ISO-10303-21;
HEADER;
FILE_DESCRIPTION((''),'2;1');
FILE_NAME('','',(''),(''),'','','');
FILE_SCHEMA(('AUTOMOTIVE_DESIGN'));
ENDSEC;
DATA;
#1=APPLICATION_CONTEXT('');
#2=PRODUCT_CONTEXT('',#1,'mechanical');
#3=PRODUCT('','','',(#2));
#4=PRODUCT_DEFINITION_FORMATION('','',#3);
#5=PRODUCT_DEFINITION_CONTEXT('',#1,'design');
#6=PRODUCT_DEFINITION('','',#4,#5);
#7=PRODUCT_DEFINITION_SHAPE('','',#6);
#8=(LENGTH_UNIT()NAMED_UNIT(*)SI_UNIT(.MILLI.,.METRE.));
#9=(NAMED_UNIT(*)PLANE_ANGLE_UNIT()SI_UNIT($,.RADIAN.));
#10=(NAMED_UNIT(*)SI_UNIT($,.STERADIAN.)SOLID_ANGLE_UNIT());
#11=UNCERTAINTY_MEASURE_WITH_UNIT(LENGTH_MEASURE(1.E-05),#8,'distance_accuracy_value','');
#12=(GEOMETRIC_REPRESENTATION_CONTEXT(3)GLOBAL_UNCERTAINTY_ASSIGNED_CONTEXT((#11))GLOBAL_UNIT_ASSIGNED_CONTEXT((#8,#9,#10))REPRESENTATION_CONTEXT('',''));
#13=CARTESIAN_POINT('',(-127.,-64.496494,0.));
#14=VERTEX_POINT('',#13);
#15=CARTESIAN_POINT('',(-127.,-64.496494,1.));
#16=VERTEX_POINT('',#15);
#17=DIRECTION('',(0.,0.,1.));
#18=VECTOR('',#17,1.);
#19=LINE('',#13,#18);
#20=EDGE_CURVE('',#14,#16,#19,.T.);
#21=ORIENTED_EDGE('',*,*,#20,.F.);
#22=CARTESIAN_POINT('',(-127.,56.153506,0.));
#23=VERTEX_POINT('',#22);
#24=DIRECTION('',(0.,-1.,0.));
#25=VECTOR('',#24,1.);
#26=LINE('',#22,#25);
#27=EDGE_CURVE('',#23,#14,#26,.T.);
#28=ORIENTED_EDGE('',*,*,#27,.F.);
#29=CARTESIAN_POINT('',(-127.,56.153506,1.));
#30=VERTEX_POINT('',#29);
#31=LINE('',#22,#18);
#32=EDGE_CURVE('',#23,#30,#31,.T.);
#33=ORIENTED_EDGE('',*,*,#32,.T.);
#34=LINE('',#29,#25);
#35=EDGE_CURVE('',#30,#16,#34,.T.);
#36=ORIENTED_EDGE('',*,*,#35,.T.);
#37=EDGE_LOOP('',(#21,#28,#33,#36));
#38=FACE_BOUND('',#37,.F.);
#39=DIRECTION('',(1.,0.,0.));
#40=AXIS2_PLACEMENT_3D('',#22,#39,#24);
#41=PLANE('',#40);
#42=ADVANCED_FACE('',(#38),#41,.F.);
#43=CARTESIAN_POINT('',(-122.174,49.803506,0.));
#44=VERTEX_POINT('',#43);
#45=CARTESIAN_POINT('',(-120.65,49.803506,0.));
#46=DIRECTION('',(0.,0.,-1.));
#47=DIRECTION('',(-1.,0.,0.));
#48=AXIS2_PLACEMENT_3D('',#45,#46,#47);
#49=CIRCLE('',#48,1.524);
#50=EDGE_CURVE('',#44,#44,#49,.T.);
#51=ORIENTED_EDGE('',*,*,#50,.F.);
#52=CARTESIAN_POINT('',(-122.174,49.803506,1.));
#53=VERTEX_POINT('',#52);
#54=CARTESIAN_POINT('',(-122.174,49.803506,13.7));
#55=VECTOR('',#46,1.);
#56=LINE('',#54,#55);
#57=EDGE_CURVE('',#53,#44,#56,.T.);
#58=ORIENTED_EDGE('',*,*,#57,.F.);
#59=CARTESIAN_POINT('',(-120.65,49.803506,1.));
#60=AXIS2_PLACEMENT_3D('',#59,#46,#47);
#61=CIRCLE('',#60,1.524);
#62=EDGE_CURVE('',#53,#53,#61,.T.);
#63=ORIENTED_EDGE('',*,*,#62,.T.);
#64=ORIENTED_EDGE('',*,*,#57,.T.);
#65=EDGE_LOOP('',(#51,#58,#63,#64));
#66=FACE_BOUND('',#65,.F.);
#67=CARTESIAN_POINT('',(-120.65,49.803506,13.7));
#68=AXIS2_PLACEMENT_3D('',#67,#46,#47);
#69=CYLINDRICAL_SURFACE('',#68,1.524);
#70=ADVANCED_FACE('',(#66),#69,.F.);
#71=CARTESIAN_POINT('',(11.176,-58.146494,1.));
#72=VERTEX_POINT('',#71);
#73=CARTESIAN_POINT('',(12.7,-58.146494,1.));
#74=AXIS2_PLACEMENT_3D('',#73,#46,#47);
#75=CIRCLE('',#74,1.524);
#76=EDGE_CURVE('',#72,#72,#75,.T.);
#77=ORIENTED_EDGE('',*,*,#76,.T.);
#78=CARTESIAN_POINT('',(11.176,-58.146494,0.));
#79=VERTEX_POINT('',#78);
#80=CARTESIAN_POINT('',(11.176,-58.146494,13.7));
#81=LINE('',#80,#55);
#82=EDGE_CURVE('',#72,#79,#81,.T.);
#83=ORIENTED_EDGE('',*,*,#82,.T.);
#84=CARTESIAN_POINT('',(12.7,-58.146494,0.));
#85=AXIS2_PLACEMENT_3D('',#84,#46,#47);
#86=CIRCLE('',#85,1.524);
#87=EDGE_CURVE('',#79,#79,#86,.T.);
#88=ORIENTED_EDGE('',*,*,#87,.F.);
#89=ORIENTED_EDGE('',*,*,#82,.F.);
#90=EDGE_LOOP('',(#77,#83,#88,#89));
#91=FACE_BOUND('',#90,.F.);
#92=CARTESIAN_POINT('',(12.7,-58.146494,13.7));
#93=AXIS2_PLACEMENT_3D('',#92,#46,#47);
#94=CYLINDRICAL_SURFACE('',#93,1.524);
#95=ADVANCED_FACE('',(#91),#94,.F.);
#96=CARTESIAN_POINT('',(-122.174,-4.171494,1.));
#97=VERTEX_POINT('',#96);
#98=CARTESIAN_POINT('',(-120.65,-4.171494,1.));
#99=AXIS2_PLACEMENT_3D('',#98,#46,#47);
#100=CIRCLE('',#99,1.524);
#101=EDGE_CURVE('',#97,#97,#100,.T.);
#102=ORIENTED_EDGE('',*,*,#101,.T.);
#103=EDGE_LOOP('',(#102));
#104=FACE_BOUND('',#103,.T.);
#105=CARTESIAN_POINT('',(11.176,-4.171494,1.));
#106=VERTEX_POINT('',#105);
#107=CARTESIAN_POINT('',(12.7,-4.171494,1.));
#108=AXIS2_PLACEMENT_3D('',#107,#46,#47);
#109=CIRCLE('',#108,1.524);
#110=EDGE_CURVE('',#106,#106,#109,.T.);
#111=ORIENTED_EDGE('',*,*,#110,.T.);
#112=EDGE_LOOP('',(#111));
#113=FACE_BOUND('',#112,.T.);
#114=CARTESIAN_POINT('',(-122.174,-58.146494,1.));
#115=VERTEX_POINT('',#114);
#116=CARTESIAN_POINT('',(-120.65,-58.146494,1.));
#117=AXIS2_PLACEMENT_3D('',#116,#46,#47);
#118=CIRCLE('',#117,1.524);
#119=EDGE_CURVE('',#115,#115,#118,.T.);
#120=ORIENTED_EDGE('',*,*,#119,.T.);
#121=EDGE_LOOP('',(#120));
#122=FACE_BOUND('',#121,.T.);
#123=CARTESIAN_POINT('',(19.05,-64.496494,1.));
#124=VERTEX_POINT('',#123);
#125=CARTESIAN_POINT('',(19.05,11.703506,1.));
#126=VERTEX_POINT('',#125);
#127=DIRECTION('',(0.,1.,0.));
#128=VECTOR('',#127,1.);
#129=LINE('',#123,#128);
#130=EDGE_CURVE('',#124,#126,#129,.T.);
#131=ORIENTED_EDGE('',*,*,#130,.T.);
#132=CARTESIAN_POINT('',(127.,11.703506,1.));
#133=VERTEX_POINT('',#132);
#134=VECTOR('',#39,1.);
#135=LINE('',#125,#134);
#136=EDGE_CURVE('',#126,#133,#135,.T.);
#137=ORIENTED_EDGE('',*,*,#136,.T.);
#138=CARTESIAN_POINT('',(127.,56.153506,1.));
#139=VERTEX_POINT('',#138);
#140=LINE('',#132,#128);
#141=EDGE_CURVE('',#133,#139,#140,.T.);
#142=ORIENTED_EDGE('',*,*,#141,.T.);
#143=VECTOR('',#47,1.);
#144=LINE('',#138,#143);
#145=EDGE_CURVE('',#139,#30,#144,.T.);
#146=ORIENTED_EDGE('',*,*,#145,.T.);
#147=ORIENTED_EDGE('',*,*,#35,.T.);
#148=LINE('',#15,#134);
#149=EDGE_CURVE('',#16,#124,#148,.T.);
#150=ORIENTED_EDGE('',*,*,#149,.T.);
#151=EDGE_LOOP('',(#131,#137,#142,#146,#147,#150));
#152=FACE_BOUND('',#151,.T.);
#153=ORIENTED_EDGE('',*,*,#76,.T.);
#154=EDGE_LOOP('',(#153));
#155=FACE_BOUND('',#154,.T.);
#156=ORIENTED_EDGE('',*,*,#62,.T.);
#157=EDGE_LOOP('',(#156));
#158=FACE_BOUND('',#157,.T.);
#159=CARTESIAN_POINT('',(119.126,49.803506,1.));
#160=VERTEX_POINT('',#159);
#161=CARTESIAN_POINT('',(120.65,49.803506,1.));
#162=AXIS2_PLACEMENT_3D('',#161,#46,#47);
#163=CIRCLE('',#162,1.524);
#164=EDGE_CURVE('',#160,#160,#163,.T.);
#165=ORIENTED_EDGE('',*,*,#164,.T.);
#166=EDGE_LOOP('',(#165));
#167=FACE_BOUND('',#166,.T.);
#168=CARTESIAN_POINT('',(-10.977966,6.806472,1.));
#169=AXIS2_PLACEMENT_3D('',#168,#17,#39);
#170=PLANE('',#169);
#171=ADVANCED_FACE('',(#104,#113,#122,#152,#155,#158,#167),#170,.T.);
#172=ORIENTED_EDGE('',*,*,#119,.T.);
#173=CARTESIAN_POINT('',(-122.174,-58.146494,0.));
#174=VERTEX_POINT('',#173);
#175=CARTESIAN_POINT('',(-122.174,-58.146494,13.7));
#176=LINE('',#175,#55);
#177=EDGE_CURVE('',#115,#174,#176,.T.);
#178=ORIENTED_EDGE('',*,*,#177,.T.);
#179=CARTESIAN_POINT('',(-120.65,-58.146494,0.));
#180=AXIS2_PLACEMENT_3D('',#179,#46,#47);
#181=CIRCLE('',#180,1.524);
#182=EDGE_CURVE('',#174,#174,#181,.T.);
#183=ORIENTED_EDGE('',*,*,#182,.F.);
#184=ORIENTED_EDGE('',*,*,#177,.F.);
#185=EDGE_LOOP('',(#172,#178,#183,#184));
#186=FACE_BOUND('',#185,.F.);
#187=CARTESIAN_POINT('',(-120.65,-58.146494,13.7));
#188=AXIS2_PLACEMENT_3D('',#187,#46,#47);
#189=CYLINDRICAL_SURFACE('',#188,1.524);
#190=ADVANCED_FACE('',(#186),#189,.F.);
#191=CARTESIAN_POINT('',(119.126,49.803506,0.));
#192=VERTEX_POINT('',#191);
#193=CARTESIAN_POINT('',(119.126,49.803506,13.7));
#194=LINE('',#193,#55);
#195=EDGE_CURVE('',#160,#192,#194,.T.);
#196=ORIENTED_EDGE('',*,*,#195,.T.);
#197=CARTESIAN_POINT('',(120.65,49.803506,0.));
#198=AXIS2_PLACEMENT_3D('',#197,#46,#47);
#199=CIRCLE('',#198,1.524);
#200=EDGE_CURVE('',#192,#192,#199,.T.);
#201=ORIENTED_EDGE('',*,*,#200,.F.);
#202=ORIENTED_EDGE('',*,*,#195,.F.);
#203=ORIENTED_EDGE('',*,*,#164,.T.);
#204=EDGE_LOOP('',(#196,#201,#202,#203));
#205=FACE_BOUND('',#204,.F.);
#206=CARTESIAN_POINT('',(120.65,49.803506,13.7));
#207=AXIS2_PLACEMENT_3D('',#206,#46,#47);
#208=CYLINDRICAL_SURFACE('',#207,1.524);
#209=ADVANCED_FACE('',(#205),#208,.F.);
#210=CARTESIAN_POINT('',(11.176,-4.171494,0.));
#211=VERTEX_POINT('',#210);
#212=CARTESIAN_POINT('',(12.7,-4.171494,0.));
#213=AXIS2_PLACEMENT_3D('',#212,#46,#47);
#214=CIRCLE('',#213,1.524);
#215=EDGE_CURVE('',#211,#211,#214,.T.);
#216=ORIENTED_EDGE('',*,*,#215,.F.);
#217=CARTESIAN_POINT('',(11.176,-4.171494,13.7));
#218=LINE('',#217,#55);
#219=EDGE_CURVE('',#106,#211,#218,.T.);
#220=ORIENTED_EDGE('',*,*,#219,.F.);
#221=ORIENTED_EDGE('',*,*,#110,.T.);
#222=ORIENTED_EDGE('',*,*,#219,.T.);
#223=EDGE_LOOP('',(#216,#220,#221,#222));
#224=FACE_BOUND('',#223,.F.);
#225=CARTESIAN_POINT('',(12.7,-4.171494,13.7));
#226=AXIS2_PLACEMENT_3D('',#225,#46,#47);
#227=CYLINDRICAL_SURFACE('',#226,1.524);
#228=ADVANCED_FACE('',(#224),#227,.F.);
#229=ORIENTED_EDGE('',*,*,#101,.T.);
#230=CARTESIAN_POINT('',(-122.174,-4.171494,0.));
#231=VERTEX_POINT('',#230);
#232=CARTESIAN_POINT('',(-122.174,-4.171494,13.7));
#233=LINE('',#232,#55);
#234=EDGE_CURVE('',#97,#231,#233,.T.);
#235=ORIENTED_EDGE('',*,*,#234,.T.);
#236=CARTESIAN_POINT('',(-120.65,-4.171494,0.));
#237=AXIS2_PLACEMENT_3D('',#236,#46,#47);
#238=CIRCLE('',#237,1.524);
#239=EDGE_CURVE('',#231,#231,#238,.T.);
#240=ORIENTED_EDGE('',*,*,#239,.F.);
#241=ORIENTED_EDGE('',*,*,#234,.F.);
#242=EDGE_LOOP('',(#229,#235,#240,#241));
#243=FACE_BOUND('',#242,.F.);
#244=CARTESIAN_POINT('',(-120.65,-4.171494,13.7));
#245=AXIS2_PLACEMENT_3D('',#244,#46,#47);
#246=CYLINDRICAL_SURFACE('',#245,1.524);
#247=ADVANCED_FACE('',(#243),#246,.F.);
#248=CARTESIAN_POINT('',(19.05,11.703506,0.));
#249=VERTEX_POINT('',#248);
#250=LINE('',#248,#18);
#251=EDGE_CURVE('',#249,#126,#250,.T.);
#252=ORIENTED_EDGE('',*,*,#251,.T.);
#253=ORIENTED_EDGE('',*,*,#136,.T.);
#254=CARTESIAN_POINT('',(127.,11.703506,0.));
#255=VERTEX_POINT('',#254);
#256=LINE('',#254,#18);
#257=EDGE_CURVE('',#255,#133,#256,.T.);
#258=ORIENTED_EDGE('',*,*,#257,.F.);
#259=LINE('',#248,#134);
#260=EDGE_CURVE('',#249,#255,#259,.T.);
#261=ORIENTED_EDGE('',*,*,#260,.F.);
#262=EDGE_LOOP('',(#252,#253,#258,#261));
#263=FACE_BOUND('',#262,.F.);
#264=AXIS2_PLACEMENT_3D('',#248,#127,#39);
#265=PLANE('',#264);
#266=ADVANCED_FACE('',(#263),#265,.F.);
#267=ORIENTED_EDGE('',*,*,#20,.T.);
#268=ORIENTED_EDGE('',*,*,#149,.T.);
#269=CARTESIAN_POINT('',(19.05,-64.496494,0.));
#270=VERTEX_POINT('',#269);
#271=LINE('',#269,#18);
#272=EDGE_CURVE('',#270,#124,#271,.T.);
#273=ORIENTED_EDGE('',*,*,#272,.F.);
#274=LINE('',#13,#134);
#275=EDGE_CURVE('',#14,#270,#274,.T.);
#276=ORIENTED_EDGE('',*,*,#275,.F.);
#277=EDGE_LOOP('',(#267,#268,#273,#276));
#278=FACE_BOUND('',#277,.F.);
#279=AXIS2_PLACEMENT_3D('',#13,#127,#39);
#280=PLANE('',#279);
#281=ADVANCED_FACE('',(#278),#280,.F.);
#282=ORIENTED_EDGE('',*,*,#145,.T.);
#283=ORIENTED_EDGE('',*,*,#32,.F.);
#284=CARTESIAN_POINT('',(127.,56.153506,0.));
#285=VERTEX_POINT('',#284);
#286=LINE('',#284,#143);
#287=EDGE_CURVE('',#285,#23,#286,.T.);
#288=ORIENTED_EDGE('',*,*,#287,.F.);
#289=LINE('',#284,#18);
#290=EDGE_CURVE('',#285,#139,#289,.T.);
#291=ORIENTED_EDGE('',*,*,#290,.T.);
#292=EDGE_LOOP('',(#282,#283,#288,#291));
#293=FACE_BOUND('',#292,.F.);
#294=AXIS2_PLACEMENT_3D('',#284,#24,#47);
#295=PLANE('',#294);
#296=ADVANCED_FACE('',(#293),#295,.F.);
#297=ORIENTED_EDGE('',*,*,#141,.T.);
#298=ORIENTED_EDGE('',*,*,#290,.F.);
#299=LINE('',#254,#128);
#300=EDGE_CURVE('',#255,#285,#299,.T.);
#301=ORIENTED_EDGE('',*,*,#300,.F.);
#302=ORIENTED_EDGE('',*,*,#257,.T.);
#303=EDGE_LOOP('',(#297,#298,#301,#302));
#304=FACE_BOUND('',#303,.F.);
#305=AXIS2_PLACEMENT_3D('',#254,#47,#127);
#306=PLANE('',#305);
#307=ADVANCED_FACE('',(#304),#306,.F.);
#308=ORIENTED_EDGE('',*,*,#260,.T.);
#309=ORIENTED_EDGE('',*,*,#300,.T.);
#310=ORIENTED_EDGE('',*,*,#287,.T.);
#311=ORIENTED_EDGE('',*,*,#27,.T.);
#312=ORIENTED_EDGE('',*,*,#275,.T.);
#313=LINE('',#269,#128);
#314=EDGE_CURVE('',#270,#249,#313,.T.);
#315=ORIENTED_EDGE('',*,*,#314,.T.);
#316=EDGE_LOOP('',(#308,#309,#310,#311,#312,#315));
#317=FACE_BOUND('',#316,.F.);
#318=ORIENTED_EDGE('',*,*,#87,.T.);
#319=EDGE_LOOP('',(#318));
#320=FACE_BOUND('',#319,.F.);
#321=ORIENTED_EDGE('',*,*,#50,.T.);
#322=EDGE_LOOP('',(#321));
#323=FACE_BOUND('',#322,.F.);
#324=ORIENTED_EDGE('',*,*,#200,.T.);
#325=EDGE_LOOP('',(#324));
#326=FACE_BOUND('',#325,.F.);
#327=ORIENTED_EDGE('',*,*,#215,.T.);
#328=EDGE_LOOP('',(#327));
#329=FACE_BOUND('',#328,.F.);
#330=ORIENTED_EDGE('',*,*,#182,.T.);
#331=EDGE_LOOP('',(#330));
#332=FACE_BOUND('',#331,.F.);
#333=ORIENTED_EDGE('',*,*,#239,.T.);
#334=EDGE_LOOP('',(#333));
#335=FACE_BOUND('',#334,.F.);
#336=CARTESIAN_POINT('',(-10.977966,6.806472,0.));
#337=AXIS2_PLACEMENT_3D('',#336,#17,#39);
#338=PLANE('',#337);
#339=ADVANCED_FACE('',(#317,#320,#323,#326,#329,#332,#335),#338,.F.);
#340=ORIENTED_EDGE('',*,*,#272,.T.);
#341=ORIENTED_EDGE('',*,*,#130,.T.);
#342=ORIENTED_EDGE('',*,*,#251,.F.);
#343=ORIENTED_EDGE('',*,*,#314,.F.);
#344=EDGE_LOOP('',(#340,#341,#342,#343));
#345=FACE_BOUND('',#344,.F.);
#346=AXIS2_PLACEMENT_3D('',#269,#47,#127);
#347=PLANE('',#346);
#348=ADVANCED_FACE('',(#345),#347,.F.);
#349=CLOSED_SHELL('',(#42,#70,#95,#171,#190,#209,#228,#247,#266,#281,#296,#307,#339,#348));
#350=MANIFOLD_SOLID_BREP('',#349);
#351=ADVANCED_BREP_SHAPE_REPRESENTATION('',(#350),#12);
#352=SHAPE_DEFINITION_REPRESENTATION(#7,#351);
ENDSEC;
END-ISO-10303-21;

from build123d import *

# Parameters (mm, degrees)
F1_DEPTH = 1
F3_D     = 3.048
F3_DEPTH = 12.7
F3_TIP   = 0.9157115834


# Not quite as in the source:
# - a feature names something its author has since deleted; it is built from what else it names


with BuildPart() as f1:
    # F0 (on Top) → F1 (new body)
    with BuildSketch(Plane.XY):
        Polygon((127, 56.1535057819), (-127, 56.1535057819), (-127, 11.7035057819), (-127, -64.4964942181), (19.05, -64.4964942181), (19.05, 11.7035057819), (127, 11.7035057819), align=None)
    extrude(amount=F1_DEPTH)

    # F3
    with Locations(Plane.XY.offset(1)):
        with Locations((-120.65, 49.8035057819), (-120.65, -4.1714942181), (-120.65, -58.1464942181), (12.7, -58.1464942181), (12.7, -4.1714942181), (120.65, 49.8035057819)):
            Hole(F3_D / 2, depth=F3_DEPTH)
            with Locations((0, 0, -(F3_DEPTH + F3_TIP / 2))):  # 118° drill point
                Cone(0, F3_D / 2, F3_TIP, mode=Mode.SUBTRACT)


solid = f1.part
